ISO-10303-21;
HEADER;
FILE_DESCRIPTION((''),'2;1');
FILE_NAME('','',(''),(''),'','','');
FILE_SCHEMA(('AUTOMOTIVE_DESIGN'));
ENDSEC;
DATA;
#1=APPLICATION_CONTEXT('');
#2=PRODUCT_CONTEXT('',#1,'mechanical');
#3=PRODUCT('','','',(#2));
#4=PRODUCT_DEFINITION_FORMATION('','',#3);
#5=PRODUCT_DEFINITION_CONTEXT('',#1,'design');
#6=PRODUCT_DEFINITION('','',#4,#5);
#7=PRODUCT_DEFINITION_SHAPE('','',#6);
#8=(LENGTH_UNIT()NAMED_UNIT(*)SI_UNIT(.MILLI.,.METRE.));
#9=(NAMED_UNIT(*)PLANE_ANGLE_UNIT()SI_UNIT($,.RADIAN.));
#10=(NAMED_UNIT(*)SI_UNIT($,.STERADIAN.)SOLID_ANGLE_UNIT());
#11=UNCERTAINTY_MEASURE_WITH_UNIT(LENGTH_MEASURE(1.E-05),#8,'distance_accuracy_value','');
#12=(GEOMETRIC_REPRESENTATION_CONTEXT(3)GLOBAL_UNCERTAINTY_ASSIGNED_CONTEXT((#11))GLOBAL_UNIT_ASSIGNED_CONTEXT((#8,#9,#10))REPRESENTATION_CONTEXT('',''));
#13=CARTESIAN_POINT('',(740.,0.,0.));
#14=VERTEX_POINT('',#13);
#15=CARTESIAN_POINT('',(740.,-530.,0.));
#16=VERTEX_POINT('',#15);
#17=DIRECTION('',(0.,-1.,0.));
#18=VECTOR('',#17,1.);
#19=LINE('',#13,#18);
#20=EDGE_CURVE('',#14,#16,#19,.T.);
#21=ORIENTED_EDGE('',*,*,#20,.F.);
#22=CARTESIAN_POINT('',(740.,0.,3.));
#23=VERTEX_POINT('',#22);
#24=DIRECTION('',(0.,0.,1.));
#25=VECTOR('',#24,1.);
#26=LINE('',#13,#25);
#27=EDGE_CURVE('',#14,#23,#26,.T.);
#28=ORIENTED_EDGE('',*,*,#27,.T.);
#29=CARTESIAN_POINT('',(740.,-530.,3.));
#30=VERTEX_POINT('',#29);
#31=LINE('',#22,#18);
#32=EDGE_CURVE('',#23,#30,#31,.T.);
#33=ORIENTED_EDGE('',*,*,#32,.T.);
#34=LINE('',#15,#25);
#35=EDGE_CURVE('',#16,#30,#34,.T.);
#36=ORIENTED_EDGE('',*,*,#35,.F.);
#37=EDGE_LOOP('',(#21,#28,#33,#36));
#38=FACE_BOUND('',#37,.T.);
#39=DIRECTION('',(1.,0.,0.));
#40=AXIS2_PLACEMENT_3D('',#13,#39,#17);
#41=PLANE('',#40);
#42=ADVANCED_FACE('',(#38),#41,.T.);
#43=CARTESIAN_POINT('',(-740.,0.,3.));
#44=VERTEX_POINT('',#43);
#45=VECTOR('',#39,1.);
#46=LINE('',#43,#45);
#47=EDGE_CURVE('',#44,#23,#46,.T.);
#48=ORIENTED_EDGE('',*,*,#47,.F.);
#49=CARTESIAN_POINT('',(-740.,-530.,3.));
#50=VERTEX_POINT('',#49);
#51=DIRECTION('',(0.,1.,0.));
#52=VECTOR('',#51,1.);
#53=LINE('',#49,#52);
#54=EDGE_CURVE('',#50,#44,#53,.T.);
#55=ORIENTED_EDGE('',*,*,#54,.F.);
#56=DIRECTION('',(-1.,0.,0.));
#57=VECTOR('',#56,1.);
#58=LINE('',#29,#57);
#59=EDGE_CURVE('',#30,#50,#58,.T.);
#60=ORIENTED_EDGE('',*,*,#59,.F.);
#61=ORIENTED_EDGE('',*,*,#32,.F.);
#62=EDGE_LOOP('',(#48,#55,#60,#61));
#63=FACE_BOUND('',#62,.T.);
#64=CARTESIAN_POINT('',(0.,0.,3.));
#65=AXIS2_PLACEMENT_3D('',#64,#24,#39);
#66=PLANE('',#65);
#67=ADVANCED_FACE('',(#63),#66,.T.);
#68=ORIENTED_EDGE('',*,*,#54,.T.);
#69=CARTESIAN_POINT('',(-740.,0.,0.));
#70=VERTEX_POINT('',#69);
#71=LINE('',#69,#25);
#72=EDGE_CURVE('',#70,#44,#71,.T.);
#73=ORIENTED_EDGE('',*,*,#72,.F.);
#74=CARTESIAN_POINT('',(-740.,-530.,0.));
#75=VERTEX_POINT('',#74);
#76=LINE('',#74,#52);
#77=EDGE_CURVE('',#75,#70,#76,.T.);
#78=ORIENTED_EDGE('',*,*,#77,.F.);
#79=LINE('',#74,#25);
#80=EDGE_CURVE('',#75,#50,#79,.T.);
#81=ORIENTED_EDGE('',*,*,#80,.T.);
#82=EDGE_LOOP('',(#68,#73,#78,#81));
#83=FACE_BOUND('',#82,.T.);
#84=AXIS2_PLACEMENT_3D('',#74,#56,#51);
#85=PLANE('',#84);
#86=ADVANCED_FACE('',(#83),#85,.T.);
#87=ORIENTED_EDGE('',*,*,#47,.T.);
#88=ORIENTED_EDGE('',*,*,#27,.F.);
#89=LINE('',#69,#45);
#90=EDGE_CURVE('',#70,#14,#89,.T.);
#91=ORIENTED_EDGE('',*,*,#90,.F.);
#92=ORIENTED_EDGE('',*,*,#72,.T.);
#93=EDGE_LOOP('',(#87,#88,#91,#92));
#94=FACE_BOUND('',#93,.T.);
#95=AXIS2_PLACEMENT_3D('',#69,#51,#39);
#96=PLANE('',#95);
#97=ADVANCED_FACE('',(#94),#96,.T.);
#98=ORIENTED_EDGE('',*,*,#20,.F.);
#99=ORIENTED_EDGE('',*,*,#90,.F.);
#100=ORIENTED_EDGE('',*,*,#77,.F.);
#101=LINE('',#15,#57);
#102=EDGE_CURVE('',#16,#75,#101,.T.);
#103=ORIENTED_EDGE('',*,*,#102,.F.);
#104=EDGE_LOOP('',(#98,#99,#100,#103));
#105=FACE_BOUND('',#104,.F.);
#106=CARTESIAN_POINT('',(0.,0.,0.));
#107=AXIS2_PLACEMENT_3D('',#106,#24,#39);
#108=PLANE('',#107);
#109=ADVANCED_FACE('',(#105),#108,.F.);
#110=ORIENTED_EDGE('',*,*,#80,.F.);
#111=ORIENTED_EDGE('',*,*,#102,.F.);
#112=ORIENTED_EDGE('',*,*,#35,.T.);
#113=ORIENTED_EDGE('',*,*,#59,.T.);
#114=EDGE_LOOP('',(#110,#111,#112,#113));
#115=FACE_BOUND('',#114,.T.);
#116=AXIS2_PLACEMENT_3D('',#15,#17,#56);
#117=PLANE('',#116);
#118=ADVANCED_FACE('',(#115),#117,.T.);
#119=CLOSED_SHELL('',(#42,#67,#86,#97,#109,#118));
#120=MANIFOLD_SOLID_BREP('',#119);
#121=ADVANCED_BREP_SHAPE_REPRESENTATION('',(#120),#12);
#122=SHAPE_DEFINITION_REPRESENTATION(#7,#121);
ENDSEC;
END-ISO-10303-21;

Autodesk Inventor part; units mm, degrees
ref_plane "YZ Plane" through (0, 0, 0) normal (1, 0, 0) x (0, 1, 0)
ref_plane "XZ Plane" through (0, 0, 0) normal (0, 1, 0) x (-1, 0, 0)
ref_plane "XY Plane" through (0, 0, 0) normal (0, 0, 1) x (1, 0, 0)
sketch "Sketch1" plane through (0, 0, 0) normal (0, 0, 1) x (1, 0, 0)
  line L0 (-740, 0) -> (740, 0)
  line L1 (740, 0) -> (740, -530)
  line L2 (740, -530) -> (-740, -530)
  line L3 (-740, -530) -> (-740, 0)
  point P0 (0, 0)
  point P1 (0, 0)
  dimension "d0" = 1480
  dimension "d1" = 530
extrude "Plate1" add sketch "Sketch1" along normal blind 3
sketch "Sketch2" plane through (0, 0, 3) normal (0, 0, 1) x (1, 0, 0)
  line L0 (-55, -480) -> (-55, -468) construction
  line L1 (-55, -468) -> (55, -468) construction
  line L2 (55, -468) -> (55, -480) construction
  line L3 (55, -480) -> (-55, -480) construction
  line L4 (740, -530) -> (-740, -530) projected
  point P0 (0, 0)
  point P1 (0, -480)
  point P2 (0, -530)
  dimension "d3" = 12
  dimension "d4" = 110
  dimension "d5" = 50
mark "Mark1"
equation "\"d2\" = Thickness"
equation "\"BendReliefWidth\" = Thickness"
equation "\"BendReliefDepth\" = 0.5 * Thickness"
equation "\"CornerReliefSize\" = 4 * Thickness"
equation "\"MinimumRemnant\" = 2 * Thickness"
equation "\"TransitionRadius\" = BendRadius"
equation "\"JacobiRadiusSize\" = BendRadius"
equation "\"GapSize\" = Thickness"
equation "\"Thickness\" = 3"
equation "\"BendRadius\" = 5"
properties part number "MSC 702 FACE 2" material "Stainless Steel"
